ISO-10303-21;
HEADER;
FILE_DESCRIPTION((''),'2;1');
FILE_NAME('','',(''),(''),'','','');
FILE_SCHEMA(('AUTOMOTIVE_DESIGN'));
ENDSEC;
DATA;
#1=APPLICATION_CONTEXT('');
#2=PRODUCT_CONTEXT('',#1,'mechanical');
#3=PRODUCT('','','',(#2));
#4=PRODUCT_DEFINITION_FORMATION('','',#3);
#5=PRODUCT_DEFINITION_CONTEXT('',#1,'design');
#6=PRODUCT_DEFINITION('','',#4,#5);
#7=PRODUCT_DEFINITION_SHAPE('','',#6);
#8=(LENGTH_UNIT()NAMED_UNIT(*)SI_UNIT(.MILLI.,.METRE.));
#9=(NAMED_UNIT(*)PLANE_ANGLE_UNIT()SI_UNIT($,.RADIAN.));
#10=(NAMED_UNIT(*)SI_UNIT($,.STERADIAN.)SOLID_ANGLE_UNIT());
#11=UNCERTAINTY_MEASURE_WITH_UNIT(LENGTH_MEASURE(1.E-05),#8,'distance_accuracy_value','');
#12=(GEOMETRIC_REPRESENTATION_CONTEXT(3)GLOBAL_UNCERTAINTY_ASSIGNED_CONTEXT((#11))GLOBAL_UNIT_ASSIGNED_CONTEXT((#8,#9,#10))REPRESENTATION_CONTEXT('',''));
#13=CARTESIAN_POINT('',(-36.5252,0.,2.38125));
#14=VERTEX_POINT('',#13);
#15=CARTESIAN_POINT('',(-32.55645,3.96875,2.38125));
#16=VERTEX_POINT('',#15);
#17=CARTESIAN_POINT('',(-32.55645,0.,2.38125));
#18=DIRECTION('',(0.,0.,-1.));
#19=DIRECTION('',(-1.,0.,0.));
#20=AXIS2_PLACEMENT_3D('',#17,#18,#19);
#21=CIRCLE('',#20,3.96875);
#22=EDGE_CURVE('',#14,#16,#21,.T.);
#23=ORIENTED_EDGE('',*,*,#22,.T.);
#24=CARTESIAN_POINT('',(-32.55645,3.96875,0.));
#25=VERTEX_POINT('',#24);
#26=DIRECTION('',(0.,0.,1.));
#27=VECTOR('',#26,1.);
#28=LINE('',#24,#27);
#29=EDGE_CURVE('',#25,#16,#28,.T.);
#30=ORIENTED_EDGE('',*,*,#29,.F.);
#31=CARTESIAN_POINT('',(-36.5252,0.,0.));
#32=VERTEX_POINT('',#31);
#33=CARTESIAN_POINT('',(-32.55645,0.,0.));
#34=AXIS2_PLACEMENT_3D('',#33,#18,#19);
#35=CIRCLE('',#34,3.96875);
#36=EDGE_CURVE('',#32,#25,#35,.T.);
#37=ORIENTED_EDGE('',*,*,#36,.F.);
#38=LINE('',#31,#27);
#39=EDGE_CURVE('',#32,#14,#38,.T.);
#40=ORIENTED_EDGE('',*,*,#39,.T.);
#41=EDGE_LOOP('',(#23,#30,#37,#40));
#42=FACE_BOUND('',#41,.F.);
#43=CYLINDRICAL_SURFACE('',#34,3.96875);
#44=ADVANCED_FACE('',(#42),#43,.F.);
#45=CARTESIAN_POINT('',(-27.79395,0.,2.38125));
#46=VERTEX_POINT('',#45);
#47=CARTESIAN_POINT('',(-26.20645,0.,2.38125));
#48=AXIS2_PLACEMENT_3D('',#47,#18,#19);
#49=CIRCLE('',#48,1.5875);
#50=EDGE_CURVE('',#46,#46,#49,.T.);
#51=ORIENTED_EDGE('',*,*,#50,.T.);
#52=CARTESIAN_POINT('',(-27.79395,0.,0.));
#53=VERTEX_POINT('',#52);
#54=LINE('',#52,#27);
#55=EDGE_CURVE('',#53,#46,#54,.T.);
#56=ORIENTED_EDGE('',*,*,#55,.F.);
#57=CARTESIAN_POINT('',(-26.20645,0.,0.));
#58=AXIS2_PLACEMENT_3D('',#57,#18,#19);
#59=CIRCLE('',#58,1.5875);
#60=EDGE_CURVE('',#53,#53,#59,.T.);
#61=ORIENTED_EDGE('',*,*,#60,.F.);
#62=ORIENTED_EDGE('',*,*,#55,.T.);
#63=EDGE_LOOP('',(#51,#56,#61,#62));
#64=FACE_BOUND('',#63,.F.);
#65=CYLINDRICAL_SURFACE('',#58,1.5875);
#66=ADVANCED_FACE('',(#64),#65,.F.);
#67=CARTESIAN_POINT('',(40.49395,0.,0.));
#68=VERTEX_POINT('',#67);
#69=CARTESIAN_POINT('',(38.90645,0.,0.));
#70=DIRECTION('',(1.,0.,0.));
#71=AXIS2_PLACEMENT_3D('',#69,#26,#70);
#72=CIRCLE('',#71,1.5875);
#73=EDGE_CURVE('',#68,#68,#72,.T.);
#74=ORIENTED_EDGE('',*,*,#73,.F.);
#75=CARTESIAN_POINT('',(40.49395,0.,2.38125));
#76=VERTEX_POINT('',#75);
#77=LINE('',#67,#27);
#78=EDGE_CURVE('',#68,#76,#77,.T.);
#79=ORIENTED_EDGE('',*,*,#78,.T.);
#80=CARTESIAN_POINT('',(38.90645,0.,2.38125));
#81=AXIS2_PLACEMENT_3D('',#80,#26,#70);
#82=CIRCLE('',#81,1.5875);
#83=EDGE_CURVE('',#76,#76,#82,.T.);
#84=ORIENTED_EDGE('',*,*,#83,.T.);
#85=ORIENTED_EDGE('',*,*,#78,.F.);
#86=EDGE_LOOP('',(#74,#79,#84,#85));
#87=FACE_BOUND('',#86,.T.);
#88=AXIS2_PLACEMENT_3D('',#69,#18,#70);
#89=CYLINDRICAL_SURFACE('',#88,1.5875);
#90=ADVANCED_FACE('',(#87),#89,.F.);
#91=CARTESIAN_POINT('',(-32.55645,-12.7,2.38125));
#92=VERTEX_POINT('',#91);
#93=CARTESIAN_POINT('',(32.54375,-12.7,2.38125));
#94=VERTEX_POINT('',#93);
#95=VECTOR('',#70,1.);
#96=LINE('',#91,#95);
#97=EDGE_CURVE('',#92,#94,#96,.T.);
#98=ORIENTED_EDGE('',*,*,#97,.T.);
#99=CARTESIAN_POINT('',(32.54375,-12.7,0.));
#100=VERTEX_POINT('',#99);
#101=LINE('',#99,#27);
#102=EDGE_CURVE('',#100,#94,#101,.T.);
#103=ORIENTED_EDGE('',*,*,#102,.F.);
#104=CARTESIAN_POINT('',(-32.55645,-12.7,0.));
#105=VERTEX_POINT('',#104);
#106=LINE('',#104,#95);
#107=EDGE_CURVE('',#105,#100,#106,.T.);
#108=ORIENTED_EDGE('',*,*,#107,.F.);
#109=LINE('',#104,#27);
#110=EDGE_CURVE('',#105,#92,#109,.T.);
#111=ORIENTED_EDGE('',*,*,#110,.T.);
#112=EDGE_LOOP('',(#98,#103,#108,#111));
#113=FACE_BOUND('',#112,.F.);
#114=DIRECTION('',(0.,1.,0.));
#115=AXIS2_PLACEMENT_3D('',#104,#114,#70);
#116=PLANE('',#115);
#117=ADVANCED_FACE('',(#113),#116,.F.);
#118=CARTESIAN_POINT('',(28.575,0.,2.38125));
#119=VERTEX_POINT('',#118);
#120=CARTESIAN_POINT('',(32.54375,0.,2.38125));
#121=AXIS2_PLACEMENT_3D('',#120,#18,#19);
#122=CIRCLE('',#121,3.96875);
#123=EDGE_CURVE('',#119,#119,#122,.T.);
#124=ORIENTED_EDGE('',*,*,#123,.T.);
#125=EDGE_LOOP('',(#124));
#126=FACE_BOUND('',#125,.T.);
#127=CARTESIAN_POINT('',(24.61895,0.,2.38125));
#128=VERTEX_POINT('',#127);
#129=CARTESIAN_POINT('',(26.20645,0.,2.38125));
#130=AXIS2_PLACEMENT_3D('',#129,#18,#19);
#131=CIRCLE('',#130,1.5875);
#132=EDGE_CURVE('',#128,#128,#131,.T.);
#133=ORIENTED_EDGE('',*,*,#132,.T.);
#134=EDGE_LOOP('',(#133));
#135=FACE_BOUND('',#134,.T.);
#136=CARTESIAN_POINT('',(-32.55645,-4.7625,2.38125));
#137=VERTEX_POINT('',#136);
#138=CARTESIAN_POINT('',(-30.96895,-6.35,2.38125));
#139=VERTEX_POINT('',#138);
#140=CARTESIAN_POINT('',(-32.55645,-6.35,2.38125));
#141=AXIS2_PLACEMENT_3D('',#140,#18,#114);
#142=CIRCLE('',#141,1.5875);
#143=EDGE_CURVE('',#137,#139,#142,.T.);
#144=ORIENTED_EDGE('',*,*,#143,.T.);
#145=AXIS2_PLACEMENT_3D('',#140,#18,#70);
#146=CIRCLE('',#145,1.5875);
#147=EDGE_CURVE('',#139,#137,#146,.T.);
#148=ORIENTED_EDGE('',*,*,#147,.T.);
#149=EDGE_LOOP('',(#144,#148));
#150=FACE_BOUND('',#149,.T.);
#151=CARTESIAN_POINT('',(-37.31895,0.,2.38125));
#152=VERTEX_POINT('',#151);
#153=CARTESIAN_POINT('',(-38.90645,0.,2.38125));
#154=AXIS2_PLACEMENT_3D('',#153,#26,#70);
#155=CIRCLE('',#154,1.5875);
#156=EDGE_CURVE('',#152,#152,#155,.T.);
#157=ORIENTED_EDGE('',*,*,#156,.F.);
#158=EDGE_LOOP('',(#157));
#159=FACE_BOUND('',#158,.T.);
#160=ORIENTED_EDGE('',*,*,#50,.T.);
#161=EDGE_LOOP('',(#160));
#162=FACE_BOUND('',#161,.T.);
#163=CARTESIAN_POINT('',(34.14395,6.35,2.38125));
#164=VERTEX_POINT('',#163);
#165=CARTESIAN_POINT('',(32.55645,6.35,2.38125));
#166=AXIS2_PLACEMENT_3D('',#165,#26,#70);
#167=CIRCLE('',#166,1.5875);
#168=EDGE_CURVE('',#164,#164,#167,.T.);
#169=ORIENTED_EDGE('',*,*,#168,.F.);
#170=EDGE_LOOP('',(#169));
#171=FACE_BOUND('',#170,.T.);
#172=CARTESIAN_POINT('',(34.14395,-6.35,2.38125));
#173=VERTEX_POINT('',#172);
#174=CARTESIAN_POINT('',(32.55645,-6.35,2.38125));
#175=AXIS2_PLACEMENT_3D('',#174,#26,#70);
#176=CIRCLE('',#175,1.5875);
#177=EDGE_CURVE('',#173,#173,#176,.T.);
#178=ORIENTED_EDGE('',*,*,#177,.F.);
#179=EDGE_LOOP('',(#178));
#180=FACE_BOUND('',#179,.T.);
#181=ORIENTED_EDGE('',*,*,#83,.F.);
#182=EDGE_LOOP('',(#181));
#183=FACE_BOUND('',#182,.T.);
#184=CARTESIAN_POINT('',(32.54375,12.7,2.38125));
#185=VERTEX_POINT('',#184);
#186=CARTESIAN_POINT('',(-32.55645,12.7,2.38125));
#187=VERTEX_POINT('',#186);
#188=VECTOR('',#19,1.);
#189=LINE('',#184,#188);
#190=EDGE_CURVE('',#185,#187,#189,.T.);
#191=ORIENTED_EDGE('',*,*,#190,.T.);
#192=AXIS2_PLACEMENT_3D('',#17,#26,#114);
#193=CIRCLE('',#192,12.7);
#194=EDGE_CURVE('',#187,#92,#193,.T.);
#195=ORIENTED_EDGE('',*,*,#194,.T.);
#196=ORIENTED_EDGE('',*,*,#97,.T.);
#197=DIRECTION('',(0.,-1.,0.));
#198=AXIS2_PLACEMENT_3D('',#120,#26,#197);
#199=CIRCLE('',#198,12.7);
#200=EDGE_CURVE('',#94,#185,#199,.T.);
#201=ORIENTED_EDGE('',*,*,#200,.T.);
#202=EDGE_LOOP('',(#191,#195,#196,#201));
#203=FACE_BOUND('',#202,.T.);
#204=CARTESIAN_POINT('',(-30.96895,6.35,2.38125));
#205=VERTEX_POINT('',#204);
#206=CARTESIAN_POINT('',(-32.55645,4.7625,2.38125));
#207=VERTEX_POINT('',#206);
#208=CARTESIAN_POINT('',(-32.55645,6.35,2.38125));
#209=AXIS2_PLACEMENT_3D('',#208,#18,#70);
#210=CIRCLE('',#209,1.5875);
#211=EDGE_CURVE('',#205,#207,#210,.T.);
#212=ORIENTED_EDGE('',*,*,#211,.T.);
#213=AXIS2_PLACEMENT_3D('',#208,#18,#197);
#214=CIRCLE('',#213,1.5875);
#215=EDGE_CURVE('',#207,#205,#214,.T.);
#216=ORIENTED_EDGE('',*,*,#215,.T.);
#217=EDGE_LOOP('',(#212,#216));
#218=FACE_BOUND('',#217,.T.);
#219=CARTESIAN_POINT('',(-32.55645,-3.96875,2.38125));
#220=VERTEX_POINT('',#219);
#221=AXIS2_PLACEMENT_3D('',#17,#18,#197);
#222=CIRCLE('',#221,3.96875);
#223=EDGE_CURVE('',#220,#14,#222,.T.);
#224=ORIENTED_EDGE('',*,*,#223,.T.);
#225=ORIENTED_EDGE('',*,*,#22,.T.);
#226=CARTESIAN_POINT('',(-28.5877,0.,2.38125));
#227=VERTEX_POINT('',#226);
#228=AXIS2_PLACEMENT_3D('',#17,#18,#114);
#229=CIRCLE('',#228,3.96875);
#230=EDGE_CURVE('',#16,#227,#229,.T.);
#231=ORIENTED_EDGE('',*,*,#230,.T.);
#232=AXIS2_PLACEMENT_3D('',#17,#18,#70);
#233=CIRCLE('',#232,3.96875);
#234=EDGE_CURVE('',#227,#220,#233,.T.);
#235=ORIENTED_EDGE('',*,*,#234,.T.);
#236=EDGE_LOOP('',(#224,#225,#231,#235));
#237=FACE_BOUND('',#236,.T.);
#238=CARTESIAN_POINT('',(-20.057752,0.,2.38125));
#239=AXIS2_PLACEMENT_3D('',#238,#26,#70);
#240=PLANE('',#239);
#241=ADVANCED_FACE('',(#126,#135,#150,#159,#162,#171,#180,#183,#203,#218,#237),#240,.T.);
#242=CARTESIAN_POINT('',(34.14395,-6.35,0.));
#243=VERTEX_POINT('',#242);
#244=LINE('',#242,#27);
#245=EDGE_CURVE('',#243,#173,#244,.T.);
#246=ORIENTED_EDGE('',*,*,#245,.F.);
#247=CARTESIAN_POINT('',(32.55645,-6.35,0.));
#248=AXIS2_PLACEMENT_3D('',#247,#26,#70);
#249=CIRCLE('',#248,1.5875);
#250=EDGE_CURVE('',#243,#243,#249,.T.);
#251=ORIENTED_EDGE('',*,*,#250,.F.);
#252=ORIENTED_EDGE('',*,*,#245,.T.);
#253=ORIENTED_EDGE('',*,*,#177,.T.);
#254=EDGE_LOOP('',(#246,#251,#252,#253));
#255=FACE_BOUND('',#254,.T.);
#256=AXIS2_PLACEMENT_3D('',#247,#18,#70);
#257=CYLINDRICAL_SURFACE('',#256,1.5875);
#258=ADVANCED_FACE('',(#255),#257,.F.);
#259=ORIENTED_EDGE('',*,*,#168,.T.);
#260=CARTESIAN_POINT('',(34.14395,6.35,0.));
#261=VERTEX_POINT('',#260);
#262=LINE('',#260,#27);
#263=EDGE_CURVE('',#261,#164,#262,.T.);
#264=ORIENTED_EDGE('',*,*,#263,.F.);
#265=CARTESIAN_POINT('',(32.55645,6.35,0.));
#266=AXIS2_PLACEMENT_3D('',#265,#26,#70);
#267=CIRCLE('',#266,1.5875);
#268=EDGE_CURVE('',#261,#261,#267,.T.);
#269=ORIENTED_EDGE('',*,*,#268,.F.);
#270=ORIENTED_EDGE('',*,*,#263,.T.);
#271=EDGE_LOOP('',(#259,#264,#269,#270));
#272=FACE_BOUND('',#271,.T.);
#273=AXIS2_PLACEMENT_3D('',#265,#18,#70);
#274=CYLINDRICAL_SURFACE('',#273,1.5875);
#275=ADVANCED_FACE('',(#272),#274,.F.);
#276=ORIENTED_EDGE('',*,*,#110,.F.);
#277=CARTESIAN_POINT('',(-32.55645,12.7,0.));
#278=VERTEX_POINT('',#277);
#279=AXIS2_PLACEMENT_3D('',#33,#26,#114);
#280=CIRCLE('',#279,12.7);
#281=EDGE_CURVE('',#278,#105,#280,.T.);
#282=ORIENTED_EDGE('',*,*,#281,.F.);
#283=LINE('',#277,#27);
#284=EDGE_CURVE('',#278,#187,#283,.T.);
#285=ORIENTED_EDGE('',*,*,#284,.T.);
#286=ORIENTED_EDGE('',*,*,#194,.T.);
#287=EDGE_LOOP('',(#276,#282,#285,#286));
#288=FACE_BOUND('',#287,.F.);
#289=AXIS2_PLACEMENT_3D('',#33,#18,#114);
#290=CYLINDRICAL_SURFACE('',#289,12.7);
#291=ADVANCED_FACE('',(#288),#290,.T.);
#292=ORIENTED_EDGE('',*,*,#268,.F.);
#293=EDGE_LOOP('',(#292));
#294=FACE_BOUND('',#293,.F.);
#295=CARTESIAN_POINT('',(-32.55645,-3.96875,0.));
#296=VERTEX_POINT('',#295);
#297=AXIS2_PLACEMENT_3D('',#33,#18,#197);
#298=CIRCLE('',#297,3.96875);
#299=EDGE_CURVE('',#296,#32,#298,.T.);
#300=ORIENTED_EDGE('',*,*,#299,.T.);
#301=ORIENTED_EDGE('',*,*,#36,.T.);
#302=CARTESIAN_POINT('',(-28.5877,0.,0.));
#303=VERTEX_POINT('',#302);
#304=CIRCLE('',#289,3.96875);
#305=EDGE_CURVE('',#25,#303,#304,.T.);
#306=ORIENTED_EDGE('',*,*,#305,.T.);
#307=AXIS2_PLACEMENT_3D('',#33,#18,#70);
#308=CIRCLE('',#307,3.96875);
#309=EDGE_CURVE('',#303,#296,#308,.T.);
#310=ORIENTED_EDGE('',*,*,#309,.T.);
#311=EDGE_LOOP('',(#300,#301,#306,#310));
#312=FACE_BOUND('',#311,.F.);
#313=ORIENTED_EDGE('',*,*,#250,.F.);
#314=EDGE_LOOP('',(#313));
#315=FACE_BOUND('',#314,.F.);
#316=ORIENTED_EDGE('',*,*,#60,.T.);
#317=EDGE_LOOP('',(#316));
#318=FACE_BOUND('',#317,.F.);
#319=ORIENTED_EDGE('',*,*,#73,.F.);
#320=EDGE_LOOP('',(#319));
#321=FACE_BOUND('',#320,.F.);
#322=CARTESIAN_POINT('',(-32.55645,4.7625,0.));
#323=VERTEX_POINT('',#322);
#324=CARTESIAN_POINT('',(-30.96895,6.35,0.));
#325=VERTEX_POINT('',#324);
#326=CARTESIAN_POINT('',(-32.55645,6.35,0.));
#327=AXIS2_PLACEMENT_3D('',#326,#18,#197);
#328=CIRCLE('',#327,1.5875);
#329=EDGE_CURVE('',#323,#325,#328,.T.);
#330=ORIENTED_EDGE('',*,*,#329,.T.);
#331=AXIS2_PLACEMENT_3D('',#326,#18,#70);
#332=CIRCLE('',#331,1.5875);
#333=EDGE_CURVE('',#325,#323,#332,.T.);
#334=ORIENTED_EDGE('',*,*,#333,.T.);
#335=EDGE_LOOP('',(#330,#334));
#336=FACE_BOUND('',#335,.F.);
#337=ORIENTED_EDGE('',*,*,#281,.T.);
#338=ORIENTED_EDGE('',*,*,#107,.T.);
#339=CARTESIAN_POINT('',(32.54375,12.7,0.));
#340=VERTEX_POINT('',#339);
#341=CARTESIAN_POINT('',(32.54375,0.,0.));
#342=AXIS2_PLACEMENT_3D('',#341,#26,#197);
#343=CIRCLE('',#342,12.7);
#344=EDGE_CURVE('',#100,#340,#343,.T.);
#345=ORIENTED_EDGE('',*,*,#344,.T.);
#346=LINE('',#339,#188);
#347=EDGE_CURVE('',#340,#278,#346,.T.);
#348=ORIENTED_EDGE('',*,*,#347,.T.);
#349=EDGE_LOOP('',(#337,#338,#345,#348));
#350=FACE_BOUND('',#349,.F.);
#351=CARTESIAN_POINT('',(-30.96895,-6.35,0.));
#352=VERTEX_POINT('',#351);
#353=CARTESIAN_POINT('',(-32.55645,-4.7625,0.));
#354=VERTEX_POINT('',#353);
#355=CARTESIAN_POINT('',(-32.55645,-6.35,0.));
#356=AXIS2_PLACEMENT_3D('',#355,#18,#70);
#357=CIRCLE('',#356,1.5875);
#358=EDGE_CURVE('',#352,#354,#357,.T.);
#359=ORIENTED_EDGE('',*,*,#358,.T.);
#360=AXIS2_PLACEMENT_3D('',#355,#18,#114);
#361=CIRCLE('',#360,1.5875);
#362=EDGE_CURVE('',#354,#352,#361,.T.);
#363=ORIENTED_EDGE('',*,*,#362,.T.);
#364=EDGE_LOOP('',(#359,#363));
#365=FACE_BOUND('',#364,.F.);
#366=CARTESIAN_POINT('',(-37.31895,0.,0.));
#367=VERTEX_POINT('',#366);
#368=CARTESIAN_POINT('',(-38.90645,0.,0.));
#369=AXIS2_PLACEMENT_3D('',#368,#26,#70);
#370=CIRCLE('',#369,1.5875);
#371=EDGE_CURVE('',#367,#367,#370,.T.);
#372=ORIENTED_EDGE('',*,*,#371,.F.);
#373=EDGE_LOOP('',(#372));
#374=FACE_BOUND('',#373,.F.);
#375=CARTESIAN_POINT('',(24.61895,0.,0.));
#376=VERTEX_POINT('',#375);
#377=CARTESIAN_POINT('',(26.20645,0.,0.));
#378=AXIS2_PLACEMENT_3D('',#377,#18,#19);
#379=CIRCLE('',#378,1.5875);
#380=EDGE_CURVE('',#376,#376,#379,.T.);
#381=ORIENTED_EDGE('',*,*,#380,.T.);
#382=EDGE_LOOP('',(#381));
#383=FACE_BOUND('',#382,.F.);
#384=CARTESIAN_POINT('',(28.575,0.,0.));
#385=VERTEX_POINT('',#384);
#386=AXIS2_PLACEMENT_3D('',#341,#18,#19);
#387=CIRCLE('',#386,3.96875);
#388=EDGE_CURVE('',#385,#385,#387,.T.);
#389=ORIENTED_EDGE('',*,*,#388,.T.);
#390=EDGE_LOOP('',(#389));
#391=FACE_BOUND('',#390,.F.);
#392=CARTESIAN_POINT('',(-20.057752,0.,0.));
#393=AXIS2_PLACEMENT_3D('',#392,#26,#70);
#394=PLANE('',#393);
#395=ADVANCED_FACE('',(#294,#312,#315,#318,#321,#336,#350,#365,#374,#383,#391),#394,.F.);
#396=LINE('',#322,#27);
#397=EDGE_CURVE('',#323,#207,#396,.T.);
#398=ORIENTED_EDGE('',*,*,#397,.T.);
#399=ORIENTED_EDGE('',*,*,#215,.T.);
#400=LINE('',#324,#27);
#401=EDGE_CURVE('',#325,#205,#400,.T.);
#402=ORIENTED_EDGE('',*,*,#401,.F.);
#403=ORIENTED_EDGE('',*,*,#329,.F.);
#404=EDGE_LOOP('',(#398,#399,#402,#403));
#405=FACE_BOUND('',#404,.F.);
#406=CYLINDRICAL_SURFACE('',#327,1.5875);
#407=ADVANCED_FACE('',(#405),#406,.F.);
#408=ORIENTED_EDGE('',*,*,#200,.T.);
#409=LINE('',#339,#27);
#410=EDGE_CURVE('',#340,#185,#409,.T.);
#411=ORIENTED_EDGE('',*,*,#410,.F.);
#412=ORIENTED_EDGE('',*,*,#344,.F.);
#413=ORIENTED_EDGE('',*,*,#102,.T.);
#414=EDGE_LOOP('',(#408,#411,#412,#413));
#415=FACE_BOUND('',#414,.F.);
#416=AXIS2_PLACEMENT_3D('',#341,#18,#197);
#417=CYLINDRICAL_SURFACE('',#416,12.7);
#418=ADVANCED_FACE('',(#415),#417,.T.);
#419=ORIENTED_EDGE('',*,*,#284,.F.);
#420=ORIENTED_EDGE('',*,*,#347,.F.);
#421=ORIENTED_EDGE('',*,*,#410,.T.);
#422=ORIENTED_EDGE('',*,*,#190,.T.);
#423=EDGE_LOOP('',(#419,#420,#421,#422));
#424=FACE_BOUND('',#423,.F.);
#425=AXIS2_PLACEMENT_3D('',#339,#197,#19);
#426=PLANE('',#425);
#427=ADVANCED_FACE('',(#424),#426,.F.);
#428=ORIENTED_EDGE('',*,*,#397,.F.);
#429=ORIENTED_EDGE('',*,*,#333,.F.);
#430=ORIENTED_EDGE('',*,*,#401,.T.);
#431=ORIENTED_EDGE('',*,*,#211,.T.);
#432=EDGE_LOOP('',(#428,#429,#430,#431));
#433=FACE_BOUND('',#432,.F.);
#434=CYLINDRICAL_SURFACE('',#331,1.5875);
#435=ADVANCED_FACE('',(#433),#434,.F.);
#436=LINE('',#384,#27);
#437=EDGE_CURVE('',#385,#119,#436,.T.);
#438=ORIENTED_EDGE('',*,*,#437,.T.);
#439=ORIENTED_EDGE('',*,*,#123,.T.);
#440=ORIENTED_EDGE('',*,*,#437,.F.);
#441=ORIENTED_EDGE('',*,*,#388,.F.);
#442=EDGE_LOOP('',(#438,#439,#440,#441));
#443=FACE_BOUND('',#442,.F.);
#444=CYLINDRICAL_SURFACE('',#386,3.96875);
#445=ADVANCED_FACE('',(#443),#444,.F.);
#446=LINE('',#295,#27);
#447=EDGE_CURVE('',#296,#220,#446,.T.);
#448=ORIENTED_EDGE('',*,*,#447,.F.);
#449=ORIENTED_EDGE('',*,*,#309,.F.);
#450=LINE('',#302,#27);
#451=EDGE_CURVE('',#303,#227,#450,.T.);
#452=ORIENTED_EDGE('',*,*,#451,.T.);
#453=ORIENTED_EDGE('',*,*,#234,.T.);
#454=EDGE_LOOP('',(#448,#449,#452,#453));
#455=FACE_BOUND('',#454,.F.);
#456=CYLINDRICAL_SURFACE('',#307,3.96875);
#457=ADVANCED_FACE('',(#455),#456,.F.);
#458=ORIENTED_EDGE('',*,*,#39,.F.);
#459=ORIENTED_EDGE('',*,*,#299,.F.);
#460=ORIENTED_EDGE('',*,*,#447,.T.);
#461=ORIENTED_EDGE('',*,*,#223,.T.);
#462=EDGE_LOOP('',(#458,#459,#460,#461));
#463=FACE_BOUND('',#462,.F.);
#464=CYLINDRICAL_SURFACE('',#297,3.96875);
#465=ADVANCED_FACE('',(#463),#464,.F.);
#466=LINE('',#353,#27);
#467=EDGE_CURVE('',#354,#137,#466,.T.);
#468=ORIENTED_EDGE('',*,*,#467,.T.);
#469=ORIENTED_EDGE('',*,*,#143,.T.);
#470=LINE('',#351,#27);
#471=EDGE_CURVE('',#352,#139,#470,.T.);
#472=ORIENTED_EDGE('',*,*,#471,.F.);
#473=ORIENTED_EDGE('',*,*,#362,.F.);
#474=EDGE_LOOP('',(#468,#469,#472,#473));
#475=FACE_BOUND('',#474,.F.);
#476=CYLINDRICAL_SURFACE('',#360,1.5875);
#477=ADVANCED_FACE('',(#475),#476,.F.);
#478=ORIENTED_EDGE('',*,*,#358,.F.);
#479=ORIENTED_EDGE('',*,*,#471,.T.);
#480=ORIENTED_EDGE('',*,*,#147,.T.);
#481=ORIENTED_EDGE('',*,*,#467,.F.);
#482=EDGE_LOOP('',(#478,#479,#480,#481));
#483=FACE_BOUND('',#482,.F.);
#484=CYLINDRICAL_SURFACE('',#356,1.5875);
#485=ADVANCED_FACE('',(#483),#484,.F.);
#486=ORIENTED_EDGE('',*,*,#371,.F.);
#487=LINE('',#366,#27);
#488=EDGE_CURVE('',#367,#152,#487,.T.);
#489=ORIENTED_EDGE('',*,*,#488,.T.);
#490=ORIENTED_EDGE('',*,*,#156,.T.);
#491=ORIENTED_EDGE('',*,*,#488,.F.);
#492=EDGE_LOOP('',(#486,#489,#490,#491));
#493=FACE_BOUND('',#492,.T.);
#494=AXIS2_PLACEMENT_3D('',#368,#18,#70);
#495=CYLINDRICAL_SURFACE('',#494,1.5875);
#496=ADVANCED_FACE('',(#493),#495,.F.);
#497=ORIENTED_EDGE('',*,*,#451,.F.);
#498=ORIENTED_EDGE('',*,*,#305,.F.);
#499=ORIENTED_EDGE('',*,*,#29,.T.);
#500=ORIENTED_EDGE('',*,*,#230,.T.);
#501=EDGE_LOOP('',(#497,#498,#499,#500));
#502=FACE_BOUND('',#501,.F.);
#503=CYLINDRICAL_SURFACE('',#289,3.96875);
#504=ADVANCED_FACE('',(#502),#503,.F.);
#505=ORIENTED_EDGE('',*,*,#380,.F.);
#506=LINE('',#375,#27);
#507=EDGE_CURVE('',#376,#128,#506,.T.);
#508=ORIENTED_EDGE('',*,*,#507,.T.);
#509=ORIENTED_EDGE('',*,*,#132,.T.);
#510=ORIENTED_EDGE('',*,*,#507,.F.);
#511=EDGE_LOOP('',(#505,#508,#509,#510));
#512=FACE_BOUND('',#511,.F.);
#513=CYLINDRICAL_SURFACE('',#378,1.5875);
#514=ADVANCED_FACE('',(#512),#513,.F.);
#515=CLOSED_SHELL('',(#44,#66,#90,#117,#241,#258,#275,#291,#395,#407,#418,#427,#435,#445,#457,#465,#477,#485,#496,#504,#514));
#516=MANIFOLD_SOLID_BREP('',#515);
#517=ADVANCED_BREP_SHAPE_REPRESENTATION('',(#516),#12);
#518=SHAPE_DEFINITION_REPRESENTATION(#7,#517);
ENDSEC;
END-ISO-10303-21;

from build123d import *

# Parameters (mm, degrees)
F0_R     = 1.5875
F1_DEPTH = 2.38125


# Not quite as in the source:
# - a length typed as a fraction of an inch, garbled in the dataset ("3 / 203.2 mm" for 3/8 in), is restored


with BuildPart() as f1:
    # F0 (on Top) → F1 (new body)
    with BuildSketch(Plane.XY):
        with BuildLine():
            Line((0, -12.7), (0, 0))
            Line((0, 0), (0, 12.7))
            Line((0, 12.7), (-32.55645, 12.7))
            ThreePointArc((-32.55645, 12.7), (-45.25645, 0), (-32.55645, -12.7))
            Line((-32.55645, -12.7), (0, -12.7))
        make_face()
        with BuildLine():
            ThreePointArc((-30.96895, -6.35), (-33.6789820151, -7.4725320151), (-32.55645, -4.7625))
            ThreePointArc((-32.55645, -4.7625), (-31.4339179849, -5.2274679849), (-30.96895, -6.35))
        make_face(mode=Mode.SUBTRACT)
        with Locations((-38.90645, 0)):
            Circle(F0_R, mode=Mode.SUBTRACT)
        with BuildLine():
            ThreePointArc((-32.55645, 3.96875), (-29.7501199622, 2.8063300378), (-28.5877, 0))
            ThreePointArc((-28.5877, 0), (-29.7501199622, -2.8063300378), (-32.55645, -3.96875))
            ThreePointArc((-32.55645, -3.96875), (-35.3627800378, -2.8063300378), (-36.5252, 0))
            ThreePointArc((-36.5252, 0), (-35.3627800378, 2.8063300378), (-32.55645, 3.96875))
        make_face(mode=Mode.SUBTRACT)
        with BuildLine():
            ThreePointArc((-24.61895, 0), (-26.20645, -1.5875), (-27.79395, 0))
            ThreePointArc((-27.79395, 0), (-26.20645, 1.5875), (-24.61895, 0))
        make_face(mode=Mode.SUBTRACT)
        with BuildLine():
            ThreePointArc((-30.96895, 6.35), (-31.4339179849, 5.2274679849), (-32.55645, 4.7625))
            ThreePointArc((-32.55645, 4.7625), (-33.6789820151, 7.4725320151), (-30.96895, 6.35))
        make_face(mode=Mode.SUBTRACT)
        with BuildLine():
            Line((0, 12.7), (0, 0))
            Line((0, 0), (0, -12.7))
            Line((0, -12.7), (32.54375, -12.7))
            ThreePointArc((32.54375, -12.7), (45.24375, 0), (32.54375, 12.7))
            Line((32.54375, 12.7), (0, 12.7))
        make_face()
        with Locations((32.55645, -6.35)):
            Circle(F0_R, mode=Mode.SUBTRACT)
        with BuildLine():
            ThreePointArc((27.79395, 0), (26.20645, -1.5875), (24.61895, 0))
            ThreePointArc((24.61895, 0), (26.20645, 1.5875), (27.79395, 0))
        make_face(mode=Mode.SUBTRACT)
        with BuildLine():
            ThreePointArc((36.5125, 0), (32.54375, -3.96875), (28.575, 0))
            ThreePointArc((28.575, 0), (32.54375, 3.96875), (36.5125, 0))
        make_face(mode=Mode.SUBTRACT)
        with Locations((38.90645, 0)):
            Circle(F0_R, mode=Mode.SUBTRACT)
        with Locations((32.55645, 6.35)):
            Circle(F0_R, mode=Mode.SUBTRACT)
    extrude(amount=F1_DEPTH)


solid = f1.part
